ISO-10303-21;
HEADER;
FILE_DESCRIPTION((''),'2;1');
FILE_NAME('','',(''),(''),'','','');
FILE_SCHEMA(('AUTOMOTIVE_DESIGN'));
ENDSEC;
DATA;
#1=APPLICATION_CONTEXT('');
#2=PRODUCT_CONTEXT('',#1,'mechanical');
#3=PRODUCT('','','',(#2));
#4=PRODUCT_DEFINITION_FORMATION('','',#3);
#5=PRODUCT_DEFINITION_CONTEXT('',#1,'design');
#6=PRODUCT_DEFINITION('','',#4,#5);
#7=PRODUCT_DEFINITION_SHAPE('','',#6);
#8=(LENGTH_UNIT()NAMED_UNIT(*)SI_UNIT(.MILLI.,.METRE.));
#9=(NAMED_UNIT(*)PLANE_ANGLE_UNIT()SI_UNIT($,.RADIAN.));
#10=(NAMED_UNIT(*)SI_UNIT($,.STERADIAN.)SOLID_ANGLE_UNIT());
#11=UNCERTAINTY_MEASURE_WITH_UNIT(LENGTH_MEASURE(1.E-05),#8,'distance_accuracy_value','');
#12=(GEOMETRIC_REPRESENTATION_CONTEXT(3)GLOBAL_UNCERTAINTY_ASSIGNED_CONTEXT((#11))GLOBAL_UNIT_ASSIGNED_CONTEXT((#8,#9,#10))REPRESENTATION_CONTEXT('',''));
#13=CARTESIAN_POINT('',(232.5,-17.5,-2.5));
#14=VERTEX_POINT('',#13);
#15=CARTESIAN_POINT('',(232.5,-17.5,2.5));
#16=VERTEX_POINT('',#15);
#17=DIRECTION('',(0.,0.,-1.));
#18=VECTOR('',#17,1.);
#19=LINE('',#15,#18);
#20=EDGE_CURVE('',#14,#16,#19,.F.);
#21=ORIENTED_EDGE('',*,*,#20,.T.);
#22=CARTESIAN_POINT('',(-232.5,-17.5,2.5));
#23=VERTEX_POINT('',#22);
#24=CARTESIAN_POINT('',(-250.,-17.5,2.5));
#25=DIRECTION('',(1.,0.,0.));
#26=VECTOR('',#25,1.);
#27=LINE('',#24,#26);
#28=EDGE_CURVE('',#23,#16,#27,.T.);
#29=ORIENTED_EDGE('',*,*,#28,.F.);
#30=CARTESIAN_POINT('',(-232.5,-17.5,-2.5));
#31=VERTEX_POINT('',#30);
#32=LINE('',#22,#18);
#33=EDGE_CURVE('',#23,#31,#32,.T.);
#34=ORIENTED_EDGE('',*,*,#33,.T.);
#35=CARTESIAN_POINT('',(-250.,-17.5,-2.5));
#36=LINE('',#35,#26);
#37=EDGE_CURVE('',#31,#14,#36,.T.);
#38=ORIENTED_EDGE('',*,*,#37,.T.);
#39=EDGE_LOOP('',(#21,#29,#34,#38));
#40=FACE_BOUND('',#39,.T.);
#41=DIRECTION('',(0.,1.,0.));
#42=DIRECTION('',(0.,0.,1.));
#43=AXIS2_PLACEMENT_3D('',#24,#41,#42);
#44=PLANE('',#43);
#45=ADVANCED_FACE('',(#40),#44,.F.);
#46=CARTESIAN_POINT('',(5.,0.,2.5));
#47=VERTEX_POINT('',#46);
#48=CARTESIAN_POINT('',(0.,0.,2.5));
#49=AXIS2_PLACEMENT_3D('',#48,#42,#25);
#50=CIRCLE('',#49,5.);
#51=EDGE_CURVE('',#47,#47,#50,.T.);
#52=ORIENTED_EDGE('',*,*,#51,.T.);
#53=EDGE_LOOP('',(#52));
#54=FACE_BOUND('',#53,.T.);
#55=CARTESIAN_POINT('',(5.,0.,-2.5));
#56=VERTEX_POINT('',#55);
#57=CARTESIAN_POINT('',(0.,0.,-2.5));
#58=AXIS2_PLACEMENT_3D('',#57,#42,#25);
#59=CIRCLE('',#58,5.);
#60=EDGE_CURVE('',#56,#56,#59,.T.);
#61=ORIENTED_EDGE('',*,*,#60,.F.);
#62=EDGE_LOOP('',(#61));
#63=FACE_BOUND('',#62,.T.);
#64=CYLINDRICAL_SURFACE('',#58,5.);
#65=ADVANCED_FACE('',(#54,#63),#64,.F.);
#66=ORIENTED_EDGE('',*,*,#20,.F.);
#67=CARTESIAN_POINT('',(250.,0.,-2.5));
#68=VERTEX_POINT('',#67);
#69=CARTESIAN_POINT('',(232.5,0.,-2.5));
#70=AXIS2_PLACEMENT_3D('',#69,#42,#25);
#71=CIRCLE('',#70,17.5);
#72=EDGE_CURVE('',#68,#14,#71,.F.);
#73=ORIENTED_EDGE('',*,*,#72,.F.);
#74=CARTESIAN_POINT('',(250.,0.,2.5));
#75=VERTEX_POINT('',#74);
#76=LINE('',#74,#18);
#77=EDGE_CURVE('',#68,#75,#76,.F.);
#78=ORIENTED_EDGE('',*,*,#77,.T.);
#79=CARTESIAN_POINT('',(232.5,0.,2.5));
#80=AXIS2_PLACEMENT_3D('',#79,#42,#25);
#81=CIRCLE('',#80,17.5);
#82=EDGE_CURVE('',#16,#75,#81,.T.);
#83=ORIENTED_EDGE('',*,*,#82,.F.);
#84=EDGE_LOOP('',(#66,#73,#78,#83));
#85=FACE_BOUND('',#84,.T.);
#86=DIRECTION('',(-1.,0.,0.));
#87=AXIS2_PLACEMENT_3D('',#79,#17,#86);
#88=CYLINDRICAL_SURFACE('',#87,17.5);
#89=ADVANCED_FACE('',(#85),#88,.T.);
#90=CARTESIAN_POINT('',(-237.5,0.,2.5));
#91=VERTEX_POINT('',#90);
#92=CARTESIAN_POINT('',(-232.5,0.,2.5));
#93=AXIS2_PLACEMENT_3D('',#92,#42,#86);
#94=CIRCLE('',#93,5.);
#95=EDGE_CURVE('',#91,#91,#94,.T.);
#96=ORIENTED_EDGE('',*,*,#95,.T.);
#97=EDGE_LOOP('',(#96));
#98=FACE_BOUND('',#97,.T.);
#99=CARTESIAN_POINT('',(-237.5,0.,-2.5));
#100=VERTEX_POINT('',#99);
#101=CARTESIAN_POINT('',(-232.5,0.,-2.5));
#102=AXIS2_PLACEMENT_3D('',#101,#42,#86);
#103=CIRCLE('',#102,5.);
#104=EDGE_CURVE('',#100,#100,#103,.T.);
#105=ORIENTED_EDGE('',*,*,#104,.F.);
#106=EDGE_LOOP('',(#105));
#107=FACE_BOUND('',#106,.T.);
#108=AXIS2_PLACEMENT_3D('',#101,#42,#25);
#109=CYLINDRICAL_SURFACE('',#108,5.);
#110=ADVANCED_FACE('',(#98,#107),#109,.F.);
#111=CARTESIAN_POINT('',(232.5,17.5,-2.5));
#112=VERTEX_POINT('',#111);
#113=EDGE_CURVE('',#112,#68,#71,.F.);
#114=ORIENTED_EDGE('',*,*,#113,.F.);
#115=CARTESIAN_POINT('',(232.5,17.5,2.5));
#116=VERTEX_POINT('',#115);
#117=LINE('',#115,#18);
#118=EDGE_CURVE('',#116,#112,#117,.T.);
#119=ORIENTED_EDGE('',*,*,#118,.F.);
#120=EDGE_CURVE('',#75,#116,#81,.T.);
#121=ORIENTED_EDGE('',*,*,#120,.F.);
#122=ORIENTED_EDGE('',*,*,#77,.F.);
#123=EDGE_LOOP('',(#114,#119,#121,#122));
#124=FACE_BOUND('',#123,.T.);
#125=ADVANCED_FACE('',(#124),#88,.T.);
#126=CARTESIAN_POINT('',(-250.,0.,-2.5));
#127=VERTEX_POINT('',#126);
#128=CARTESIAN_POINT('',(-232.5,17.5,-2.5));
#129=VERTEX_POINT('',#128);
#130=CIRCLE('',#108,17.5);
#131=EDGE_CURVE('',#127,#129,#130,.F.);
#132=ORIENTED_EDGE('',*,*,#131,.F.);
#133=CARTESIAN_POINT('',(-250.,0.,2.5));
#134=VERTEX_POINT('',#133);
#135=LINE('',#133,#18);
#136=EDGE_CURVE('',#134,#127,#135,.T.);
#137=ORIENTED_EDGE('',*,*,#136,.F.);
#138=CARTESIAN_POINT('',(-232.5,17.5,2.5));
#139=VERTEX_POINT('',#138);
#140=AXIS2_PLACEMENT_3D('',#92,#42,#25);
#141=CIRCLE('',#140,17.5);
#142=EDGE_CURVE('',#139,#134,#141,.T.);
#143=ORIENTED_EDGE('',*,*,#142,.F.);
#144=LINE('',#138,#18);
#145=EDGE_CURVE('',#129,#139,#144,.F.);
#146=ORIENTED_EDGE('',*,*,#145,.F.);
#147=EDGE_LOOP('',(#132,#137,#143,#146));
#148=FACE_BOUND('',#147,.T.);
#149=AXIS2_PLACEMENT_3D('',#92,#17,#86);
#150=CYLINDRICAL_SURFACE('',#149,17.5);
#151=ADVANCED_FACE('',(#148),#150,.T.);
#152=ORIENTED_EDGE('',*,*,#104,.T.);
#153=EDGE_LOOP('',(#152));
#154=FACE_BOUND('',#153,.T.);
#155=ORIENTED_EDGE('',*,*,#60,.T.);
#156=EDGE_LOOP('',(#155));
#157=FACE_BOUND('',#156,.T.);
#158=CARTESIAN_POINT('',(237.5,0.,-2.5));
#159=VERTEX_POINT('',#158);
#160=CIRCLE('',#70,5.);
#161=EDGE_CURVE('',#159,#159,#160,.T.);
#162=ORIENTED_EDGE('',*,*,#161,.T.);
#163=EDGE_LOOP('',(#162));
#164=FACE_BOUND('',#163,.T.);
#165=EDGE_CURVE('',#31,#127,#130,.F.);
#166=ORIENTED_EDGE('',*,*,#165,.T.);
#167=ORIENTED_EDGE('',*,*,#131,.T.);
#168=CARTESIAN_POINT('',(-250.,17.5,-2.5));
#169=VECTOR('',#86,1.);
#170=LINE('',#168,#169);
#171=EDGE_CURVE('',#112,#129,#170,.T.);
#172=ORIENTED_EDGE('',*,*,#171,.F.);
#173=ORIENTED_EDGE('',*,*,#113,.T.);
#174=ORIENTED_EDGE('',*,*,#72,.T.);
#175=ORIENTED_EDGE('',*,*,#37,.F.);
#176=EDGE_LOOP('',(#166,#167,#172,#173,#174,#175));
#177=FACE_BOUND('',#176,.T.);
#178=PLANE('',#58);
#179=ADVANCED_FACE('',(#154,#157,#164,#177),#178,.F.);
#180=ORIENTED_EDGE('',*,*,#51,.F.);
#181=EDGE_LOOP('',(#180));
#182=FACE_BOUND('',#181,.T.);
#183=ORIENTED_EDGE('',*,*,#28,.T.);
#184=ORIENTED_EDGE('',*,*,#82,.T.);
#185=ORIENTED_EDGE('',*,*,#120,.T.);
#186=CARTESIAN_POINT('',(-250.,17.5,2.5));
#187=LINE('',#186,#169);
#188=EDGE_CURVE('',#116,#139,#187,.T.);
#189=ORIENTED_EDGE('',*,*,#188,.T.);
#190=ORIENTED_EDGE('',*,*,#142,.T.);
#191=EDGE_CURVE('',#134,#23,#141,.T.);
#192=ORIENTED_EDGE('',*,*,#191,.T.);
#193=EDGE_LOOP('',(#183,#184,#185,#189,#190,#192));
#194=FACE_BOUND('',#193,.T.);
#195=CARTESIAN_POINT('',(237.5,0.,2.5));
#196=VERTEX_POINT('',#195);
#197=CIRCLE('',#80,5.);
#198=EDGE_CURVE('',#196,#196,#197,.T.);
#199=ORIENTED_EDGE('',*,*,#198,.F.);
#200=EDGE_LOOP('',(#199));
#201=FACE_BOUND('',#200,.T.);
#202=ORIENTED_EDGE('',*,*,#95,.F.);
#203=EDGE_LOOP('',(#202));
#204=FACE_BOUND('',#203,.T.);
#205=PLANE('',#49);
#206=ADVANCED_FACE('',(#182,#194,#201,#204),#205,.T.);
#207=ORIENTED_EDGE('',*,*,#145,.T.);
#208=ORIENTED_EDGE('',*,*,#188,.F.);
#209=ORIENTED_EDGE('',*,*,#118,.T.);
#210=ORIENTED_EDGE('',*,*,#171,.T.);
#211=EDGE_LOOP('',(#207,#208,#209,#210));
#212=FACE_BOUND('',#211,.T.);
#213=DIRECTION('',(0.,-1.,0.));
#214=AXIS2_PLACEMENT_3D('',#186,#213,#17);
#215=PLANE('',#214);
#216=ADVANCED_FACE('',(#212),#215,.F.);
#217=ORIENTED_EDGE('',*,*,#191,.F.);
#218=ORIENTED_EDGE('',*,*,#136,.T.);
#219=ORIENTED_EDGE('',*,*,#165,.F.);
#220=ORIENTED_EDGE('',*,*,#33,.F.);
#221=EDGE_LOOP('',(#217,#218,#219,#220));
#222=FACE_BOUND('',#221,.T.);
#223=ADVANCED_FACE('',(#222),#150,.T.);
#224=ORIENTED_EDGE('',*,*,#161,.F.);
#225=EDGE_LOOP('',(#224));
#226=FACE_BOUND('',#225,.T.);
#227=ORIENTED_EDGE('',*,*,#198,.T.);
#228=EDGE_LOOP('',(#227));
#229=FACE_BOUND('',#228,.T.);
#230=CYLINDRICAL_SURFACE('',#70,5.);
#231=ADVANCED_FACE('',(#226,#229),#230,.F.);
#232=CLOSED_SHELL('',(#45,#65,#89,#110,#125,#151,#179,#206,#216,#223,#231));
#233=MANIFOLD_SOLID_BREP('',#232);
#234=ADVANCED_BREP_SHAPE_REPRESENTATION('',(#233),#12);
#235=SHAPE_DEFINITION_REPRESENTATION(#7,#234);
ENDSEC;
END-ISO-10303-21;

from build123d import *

# Parameters (mm, degrees)
SKETCH1_W           = 500
SKETCH1_H           = 35
BOSS_EXTRUDE1_DEPTH = 2.5
FILLET1_R           = 17.5
SKETCH2_R           = 5
CUT_EXTRUDE1_DEPTH  = 5


with BuildPart() as part:
    # Sketch1 → Boss-Extrude1 (new, symmetric)
    with BuildSketch(Plane.XY):
        Rectangle(SKETCH1_W, SKETCH1_H)
    extrude(amount=BOSS_EXTRUDE1_DEPTH, both=True)

    # Fillet1
    fillet1_edges = [part.edges().sort_by_distance(p)[0] for p in [
        (-250, -17.5, 0),
        (-250, 17.5, 0),
        (250, -17.5, 0),
        (250, 17.5, 0),
    ]]
    fillet(fillet1_edges, radius=FILLET1_R - 0.0001)  # a hair under: the kernel refuses the full size

    # Sketch2 → Cut-Extrude1 (cut)
    with BuildSketch(Plane.XY.offset(2.5)):
        Circle(SKETCH2_R)
        with Locations((232.5, 0)):
            Circle(SKETCH2_R)
        with Locations(Location((-232.5, 0, 0), (0, 0, 180))):
            Circle(SKETCH2_R)
    extrude(amount=-CUT_EXTRUDE1_DEPTH, mode=Mode.SUBTRACT)


solid = part.part
